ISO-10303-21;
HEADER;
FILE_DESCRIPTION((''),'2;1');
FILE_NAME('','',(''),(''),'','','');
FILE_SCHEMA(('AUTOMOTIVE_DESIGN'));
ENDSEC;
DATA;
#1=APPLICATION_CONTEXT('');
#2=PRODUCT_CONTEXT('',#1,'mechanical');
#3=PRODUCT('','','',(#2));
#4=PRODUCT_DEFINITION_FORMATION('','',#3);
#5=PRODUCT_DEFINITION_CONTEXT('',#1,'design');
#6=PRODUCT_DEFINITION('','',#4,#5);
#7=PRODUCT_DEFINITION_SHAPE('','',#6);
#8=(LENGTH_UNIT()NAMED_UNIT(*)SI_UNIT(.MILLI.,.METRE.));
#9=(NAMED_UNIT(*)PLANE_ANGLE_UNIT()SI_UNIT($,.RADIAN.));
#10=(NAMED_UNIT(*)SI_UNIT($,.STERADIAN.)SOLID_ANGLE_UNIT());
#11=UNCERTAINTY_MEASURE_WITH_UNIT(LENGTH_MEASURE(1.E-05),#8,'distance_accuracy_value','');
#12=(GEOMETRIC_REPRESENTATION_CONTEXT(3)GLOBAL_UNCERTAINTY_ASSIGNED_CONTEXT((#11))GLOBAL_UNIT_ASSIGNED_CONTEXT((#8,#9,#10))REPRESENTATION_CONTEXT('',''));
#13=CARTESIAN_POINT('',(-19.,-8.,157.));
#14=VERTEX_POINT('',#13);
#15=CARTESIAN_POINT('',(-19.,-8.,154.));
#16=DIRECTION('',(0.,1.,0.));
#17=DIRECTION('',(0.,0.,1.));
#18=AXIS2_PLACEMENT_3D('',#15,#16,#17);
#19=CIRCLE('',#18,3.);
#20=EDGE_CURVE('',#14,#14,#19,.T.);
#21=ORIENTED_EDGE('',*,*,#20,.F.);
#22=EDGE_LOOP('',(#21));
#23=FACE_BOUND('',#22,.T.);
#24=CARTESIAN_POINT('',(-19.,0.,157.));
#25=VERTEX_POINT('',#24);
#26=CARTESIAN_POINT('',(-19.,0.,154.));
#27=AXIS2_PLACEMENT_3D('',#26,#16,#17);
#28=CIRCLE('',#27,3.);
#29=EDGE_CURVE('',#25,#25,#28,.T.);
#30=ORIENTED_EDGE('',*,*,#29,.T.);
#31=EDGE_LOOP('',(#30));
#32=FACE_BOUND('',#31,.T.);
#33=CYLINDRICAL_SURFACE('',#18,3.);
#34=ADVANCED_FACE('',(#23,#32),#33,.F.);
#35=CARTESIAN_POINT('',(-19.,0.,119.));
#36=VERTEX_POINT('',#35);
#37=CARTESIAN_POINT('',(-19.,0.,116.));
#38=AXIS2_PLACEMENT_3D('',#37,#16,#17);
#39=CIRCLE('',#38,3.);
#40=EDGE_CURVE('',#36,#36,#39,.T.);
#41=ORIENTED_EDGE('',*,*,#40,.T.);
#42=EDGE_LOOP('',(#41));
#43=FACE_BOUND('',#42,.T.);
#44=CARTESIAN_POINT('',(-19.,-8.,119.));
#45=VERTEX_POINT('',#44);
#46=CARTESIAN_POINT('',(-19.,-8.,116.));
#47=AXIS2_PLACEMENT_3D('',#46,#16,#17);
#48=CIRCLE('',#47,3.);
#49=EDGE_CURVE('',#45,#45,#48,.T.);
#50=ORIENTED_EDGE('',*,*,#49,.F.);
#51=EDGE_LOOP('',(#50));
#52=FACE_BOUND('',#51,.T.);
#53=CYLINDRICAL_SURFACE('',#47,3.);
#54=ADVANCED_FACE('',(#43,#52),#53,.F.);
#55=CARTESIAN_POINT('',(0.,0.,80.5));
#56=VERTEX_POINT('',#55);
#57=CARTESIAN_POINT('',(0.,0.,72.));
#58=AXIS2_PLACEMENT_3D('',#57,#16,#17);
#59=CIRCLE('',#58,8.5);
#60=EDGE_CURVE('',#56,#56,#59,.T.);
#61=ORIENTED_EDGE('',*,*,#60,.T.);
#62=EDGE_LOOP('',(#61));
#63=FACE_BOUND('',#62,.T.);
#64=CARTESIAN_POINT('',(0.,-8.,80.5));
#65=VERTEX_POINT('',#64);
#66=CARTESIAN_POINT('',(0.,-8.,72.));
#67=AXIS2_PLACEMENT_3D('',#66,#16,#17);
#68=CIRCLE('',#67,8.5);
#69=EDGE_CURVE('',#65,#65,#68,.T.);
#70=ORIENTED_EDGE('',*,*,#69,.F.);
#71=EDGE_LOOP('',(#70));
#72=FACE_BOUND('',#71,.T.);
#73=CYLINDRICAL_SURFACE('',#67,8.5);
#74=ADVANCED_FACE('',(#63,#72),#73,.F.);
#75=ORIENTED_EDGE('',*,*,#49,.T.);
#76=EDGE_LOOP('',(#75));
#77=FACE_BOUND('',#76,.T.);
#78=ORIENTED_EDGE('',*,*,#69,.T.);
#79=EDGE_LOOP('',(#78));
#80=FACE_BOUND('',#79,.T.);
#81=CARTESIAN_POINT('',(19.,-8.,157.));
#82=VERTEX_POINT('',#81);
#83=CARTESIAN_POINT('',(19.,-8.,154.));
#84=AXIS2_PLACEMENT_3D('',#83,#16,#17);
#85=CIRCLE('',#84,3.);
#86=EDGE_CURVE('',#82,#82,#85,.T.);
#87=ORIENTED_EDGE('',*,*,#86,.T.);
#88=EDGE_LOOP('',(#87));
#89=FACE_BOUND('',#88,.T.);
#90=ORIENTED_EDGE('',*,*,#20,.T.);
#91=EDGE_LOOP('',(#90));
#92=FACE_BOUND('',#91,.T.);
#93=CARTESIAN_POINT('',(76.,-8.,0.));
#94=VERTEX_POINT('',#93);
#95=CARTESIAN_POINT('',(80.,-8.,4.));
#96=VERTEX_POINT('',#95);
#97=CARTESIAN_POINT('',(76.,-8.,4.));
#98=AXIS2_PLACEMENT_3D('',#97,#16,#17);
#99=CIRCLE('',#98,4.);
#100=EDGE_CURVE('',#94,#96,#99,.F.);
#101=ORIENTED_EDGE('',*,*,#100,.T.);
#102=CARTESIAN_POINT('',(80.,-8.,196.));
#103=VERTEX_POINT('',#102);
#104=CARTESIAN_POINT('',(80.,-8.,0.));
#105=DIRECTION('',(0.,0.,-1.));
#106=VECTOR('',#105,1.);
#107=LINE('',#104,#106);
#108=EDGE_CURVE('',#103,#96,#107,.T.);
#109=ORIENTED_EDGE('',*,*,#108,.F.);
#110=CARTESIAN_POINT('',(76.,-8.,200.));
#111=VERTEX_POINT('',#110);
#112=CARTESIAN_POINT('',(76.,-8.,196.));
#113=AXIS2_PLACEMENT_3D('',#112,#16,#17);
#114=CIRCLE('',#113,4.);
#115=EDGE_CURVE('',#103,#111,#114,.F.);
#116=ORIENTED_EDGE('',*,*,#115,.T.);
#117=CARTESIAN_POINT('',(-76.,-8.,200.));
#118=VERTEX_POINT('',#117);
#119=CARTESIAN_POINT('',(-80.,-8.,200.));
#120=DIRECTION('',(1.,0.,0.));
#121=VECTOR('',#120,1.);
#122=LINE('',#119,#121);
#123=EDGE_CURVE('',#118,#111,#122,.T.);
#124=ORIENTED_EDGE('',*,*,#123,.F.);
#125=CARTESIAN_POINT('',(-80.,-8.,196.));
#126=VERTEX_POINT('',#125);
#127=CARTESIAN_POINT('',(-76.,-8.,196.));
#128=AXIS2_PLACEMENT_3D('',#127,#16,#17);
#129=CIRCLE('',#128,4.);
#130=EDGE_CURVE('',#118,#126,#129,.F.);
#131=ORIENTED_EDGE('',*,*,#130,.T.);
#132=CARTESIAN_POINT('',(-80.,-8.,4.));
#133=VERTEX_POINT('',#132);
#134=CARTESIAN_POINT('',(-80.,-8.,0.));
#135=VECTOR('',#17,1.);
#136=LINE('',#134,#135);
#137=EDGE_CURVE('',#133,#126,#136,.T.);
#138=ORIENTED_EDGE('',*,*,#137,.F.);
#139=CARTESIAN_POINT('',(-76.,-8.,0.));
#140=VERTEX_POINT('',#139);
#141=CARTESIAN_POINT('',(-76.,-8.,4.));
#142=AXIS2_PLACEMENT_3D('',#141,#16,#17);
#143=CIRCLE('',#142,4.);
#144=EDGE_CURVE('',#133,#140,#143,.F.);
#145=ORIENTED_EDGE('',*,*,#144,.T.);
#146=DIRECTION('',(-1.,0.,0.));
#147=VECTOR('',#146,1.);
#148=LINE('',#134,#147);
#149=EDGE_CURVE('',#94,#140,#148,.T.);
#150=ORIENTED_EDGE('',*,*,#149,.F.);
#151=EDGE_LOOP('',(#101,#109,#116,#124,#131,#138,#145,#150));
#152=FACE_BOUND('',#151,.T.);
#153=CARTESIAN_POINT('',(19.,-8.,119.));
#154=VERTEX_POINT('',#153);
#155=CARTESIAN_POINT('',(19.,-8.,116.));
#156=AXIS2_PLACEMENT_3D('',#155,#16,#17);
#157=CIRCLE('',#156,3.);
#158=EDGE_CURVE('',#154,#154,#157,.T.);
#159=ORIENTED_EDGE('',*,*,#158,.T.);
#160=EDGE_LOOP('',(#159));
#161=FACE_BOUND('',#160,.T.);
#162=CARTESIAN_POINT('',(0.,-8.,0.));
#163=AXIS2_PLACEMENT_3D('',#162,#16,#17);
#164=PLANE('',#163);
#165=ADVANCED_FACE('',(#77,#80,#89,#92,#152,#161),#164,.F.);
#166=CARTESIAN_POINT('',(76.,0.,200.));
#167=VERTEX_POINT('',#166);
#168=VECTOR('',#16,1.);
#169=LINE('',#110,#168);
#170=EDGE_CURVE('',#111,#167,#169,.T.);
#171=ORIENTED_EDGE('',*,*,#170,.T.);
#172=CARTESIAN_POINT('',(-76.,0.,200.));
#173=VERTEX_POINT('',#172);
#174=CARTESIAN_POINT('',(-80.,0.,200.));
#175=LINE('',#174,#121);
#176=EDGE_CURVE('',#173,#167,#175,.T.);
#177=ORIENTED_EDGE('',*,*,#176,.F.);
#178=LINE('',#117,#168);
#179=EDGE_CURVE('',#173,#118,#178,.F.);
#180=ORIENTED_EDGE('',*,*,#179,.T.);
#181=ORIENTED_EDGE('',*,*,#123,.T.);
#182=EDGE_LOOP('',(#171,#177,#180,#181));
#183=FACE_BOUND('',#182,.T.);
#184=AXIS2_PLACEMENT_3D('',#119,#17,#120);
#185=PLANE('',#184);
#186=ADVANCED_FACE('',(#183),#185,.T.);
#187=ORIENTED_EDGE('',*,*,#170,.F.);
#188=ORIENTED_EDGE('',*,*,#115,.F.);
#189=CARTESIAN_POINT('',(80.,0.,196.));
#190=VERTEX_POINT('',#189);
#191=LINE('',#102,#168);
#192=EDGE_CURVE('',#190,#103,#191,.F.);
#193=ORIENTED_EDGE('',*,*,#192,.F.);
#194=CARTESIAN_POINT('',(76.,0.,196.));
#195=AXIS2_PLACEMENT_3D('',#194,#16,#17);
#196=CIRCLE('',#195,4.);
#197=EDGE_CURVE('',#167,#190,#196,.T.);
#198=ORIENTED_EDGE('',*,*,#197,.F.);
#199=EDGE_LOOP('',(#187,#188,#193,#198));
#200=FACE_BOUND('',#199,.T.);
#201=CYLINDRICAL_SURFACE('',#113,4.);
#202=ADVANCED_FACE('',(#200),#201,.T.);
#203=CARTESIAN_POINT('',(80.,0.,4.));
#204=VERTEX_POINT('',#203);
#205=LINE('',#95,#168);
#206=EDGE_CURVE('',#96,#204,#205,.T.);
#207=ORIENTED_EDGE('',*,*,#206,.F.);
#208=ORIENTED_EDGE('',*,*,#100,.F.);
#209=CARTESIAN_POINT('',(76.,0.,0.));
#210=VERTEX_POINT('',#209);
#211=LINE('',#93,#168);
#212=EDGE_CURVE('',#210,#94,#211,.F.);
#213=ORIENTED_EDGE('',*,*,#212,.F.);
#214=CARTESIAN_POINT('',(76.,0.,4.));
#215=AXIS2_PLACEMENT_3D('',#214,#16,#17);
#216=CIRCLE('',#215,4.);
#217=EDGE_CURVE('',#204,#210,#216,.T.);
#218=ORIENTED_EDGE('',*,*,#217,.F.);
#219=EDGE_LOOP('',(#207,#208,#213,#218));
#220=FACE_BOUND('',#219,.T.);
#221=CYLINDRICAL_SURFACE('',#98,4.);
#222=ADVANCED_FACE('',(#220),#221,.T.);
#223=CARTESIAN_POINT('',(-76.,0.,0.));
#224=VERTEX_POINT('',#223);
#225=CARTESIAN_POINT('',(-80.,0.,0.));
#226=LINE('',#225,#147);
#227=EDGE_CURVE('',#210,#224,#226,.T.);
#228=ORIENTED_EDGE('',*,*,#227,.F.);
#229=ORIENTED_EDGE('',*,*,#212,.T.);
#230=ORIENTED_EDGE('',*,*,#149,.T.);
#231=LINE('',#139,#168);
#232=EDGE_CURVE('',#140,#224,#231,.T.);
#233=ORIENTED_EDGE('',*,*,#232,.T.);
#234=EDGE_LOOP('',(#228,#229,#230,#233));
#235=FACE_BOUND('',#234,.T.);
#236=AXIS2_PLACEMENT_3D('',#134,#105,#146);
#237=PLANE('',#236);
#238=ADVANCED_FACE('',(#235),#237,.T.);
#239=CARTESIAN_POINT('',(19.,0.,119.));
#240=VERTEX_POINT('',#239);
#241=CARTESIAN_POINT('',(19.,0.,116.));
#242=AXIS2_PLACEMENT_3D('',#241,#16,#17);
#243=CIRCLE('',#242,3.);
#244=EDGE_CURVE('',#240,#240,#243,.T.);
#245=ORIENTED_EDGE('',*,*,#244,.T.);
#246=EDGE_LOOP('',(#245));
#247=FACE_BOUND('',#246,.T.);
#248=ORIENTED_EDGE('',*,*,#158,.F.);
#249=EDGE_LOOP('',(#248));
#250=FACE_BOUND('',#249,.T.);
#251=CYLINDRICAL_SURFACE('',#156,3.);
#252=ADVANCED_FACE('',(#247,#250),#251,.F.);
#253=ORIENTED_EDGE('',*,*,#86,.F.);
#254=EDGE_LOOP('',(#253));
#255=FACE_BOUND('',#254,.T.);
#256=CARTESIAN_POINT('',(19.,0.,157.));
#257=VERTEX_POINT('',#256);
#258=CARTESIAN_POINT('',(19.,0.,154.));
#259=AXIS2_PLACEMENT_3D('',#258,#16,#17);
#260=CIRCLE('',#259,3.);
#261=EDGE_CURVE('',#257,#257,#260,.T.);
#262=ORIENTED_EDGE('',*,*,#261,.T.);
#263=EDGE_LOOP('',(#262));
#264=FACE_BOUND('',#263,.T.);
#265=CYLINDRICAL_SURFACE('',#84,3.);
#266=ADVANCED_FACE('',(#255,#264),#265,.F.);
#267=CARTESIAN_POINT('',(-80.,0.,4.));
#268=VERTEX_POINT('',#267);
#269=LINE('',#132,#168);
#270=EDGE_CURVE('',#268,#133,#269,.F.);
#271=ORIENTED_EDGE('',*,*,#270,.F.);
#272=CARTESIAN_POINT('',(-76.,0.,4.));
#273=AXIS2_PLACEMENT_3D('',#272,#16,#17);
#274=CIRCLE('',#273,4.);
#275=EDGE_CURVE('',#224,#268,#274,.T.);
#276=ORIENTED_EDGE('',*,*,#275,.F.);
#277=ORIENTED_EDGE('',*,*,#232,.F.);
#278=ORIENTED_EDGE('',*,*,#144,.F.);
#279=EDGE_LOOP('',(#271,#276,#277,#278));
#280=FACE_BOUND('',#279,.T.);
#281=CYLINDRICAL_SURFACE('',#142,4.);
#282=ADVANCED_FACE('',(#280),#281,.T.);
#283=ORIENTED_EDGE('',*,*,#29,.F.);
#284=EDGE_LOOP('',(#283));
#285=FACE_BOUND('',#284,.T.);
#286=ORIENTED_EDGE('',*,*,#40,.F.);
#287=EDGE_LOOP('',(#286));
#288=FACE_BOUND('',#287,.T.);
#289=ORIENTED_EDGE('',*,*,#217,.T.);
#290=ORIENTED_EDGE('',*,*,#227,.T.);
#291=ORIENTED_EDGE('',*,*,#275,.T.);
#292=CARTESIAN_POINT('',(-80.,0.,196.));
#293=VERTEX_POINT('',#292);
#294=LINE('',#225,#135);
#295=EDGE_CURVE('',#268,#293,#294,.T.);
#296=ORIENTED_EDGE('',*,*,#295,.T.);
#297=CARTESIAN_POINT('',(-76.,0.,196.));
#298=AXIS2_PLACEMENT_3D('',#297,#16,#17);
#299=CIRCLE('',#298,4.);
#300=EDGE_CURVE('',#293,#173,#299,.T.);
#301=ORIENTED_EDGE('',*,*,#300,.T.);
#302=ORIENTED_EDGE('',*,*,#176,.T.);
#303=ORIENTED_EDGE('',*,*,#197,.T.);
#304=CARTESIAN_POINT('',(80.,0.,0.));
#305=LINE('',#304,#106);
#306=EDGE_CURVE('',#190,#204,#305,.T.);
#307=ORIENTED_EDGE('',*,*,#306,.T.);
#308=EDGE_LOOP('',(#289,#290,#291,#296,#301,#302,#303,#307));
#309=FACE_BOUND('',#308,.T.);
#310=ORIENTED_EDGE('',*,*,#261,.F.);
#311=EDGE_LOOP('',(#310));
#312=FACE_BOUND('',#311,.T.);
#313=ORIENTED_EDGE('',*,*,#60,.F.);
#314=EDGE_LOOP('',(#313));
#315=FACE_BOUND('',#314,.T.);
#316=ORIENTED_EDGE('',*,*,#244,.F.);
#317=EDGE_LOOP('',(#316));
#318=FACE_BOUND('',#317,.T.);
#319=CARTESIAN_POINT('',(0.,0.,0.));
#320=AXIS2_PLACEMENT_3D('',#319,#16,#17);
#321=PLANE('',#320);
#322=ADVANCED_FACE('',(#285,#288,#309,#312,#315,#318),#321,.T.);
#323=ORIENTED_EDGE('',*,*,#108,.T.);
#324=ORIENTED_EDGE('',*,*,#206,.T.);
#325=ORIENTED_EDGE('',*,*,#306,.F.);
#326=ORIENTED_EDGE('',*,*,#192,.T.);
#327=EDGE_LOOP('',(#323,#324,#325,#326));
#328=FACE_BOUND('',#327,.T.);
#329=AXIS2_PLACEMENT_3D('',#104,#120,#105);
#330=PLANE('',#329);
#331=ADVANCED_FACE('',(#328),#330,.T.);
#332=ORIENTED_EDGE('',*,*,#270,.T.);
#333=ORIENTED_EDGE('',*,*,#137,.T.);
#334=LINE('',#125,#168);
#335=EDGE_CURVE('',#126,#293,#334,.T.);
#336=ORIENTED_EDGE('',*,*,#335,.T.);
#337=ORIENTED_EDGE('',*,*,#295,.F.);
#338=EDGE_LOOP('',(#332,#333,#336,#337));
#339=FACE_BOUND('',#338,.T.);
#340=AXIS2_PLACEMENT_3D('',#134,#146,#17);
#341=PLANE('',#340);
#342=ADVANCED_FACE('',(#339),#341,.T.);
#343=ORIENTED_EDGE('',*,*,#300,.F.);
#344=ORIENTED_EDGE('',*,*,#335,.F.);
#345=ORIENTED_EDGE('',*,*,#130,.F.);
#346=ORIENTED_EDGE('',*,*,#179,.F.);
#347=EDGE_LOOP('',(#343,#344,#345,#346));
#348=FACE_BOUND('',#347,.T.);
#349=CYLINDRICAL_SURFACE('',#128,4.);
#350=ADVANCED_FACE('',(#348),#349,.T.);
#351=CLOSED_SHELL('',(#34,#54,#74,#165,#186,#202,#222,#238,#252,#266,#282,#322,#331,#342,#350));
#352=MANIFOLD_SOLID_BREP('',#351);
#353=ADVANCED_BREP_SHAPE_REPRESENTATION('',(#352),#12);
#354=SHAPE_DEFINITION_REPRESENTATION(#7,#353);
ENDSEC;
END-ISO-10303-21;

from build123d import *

# Parameters (mm, degrees)
IZIM2_W               = 160
IZIM2_H               = 200
TABAN_FLAN_1_DEPTH    = 8
K_ELERI_START         = -8
K_ELERI_K_R1_DEPTH    = 8
IZIM3_R               = 8.5
KES_EKSTR_ZYON1_DEPTH = 216.555097365
IZIM4_R               = 3
KES_EKSTR_ZYON2_DEPTH = 216.555097365


# Read off the part's stored shape, not the designer's step: Köşeleri kır1
# Sheet-metal steps are written as plain solids
with BuildPart() as part:
    # Çizim2 → Taban-Flanş1 (new body)
    with BuildSketch(Plane(origin=(0, 0, 0), x_dir=(1, 0, 0), z_dir=(0, 1, 0))):
        with Locations((0, -100)):
            Rectangle(IZIM2_W, IZIM2_H)
    extrude(amount=-TABAN_FLAN_1_DEPTH)

    # Köşeleri kır1 outline → Köşeleri kır1 (cut)
    with BuildSketch(Plane(origin=(0, 0, 0), x_dir=(1, 0, 0), z_dir=(0, 1, 0)).offset(K_ELERI_START)):
        with BuildLine():
            ThreePointArc((80, -196), (78.828427125, -198.828427125), (76, -200))
            Line((76, -200), (80, -200))
            Line((80, -200), (80, -196))
        make_face()
        with BuildLine():
            Line((-80, -200), (-76, -200))
            ThreePointArc((-76, -200), (-78.828427125, -198.828427125), (-80, -196))
            Line((-80, -196), (-80, -200))
        make_face()
        with BuildLine():
            ThreePointArc((76, 0), (78.828427125, -1.171572875), (80, -4))
            Line((80, -4), (80, 0))
            Line((80, 0), (76, 0))
        make_face()
        with BuildLine():
            Line((-80, 0), (-80, -4))
            ThreePointArc((-80, -4), (-78.828427125, -1.171572875), (-76, 0))
            Line((-76, 0), (-80, 0))
        make_face()
    extrude(amount=K_ELERI_K_R1_DEPTH, mode=Mode.SUBTRACT)

    # Çizim3 → Kes-Ekstrüzyon1 (cut, through all)
    with BuildSketch(Plane(origin=(0, 0, 0), x_dir=(1, 0, 0), z_dir=(0, 1, 0))):
        with Locations(Location((0, -72, 0), (0, 0, 270))):
            Circle(IZIM3_R)
    extrude(amount=-KES_EKSTR_ZYON1_DEPTH, mode=Mode.SUBTRACT)

    # Çizim4 → Kes-Ekstrüzyon2 (cut, through all)
    with BuildSketch(Plane(origin=(0, 0, 0), x_dir=(1, 0, 0), z_dir=(0, 1, 0))):
        with Locations(Location((-19, -116, 0), (0, 0, 270))):
            Circle(IZIM4_R)
        with Locations(Location((19, -116, 0), (0, 0, 270))):
            Circle(IZIM4_R)
        with Locations(Location((19, -154, 0), (0, 0, 270))):
            Circle(IZIM4_R)
        with Locations(Location((-19, -154, 0), (0, 0, 270))):
            Circle(IZIM4_R)
    extrude(amount=-KES_EKSTR_ZYON2_DEPTH, mode=Mode.SUBTRACT)


solid = part.part
